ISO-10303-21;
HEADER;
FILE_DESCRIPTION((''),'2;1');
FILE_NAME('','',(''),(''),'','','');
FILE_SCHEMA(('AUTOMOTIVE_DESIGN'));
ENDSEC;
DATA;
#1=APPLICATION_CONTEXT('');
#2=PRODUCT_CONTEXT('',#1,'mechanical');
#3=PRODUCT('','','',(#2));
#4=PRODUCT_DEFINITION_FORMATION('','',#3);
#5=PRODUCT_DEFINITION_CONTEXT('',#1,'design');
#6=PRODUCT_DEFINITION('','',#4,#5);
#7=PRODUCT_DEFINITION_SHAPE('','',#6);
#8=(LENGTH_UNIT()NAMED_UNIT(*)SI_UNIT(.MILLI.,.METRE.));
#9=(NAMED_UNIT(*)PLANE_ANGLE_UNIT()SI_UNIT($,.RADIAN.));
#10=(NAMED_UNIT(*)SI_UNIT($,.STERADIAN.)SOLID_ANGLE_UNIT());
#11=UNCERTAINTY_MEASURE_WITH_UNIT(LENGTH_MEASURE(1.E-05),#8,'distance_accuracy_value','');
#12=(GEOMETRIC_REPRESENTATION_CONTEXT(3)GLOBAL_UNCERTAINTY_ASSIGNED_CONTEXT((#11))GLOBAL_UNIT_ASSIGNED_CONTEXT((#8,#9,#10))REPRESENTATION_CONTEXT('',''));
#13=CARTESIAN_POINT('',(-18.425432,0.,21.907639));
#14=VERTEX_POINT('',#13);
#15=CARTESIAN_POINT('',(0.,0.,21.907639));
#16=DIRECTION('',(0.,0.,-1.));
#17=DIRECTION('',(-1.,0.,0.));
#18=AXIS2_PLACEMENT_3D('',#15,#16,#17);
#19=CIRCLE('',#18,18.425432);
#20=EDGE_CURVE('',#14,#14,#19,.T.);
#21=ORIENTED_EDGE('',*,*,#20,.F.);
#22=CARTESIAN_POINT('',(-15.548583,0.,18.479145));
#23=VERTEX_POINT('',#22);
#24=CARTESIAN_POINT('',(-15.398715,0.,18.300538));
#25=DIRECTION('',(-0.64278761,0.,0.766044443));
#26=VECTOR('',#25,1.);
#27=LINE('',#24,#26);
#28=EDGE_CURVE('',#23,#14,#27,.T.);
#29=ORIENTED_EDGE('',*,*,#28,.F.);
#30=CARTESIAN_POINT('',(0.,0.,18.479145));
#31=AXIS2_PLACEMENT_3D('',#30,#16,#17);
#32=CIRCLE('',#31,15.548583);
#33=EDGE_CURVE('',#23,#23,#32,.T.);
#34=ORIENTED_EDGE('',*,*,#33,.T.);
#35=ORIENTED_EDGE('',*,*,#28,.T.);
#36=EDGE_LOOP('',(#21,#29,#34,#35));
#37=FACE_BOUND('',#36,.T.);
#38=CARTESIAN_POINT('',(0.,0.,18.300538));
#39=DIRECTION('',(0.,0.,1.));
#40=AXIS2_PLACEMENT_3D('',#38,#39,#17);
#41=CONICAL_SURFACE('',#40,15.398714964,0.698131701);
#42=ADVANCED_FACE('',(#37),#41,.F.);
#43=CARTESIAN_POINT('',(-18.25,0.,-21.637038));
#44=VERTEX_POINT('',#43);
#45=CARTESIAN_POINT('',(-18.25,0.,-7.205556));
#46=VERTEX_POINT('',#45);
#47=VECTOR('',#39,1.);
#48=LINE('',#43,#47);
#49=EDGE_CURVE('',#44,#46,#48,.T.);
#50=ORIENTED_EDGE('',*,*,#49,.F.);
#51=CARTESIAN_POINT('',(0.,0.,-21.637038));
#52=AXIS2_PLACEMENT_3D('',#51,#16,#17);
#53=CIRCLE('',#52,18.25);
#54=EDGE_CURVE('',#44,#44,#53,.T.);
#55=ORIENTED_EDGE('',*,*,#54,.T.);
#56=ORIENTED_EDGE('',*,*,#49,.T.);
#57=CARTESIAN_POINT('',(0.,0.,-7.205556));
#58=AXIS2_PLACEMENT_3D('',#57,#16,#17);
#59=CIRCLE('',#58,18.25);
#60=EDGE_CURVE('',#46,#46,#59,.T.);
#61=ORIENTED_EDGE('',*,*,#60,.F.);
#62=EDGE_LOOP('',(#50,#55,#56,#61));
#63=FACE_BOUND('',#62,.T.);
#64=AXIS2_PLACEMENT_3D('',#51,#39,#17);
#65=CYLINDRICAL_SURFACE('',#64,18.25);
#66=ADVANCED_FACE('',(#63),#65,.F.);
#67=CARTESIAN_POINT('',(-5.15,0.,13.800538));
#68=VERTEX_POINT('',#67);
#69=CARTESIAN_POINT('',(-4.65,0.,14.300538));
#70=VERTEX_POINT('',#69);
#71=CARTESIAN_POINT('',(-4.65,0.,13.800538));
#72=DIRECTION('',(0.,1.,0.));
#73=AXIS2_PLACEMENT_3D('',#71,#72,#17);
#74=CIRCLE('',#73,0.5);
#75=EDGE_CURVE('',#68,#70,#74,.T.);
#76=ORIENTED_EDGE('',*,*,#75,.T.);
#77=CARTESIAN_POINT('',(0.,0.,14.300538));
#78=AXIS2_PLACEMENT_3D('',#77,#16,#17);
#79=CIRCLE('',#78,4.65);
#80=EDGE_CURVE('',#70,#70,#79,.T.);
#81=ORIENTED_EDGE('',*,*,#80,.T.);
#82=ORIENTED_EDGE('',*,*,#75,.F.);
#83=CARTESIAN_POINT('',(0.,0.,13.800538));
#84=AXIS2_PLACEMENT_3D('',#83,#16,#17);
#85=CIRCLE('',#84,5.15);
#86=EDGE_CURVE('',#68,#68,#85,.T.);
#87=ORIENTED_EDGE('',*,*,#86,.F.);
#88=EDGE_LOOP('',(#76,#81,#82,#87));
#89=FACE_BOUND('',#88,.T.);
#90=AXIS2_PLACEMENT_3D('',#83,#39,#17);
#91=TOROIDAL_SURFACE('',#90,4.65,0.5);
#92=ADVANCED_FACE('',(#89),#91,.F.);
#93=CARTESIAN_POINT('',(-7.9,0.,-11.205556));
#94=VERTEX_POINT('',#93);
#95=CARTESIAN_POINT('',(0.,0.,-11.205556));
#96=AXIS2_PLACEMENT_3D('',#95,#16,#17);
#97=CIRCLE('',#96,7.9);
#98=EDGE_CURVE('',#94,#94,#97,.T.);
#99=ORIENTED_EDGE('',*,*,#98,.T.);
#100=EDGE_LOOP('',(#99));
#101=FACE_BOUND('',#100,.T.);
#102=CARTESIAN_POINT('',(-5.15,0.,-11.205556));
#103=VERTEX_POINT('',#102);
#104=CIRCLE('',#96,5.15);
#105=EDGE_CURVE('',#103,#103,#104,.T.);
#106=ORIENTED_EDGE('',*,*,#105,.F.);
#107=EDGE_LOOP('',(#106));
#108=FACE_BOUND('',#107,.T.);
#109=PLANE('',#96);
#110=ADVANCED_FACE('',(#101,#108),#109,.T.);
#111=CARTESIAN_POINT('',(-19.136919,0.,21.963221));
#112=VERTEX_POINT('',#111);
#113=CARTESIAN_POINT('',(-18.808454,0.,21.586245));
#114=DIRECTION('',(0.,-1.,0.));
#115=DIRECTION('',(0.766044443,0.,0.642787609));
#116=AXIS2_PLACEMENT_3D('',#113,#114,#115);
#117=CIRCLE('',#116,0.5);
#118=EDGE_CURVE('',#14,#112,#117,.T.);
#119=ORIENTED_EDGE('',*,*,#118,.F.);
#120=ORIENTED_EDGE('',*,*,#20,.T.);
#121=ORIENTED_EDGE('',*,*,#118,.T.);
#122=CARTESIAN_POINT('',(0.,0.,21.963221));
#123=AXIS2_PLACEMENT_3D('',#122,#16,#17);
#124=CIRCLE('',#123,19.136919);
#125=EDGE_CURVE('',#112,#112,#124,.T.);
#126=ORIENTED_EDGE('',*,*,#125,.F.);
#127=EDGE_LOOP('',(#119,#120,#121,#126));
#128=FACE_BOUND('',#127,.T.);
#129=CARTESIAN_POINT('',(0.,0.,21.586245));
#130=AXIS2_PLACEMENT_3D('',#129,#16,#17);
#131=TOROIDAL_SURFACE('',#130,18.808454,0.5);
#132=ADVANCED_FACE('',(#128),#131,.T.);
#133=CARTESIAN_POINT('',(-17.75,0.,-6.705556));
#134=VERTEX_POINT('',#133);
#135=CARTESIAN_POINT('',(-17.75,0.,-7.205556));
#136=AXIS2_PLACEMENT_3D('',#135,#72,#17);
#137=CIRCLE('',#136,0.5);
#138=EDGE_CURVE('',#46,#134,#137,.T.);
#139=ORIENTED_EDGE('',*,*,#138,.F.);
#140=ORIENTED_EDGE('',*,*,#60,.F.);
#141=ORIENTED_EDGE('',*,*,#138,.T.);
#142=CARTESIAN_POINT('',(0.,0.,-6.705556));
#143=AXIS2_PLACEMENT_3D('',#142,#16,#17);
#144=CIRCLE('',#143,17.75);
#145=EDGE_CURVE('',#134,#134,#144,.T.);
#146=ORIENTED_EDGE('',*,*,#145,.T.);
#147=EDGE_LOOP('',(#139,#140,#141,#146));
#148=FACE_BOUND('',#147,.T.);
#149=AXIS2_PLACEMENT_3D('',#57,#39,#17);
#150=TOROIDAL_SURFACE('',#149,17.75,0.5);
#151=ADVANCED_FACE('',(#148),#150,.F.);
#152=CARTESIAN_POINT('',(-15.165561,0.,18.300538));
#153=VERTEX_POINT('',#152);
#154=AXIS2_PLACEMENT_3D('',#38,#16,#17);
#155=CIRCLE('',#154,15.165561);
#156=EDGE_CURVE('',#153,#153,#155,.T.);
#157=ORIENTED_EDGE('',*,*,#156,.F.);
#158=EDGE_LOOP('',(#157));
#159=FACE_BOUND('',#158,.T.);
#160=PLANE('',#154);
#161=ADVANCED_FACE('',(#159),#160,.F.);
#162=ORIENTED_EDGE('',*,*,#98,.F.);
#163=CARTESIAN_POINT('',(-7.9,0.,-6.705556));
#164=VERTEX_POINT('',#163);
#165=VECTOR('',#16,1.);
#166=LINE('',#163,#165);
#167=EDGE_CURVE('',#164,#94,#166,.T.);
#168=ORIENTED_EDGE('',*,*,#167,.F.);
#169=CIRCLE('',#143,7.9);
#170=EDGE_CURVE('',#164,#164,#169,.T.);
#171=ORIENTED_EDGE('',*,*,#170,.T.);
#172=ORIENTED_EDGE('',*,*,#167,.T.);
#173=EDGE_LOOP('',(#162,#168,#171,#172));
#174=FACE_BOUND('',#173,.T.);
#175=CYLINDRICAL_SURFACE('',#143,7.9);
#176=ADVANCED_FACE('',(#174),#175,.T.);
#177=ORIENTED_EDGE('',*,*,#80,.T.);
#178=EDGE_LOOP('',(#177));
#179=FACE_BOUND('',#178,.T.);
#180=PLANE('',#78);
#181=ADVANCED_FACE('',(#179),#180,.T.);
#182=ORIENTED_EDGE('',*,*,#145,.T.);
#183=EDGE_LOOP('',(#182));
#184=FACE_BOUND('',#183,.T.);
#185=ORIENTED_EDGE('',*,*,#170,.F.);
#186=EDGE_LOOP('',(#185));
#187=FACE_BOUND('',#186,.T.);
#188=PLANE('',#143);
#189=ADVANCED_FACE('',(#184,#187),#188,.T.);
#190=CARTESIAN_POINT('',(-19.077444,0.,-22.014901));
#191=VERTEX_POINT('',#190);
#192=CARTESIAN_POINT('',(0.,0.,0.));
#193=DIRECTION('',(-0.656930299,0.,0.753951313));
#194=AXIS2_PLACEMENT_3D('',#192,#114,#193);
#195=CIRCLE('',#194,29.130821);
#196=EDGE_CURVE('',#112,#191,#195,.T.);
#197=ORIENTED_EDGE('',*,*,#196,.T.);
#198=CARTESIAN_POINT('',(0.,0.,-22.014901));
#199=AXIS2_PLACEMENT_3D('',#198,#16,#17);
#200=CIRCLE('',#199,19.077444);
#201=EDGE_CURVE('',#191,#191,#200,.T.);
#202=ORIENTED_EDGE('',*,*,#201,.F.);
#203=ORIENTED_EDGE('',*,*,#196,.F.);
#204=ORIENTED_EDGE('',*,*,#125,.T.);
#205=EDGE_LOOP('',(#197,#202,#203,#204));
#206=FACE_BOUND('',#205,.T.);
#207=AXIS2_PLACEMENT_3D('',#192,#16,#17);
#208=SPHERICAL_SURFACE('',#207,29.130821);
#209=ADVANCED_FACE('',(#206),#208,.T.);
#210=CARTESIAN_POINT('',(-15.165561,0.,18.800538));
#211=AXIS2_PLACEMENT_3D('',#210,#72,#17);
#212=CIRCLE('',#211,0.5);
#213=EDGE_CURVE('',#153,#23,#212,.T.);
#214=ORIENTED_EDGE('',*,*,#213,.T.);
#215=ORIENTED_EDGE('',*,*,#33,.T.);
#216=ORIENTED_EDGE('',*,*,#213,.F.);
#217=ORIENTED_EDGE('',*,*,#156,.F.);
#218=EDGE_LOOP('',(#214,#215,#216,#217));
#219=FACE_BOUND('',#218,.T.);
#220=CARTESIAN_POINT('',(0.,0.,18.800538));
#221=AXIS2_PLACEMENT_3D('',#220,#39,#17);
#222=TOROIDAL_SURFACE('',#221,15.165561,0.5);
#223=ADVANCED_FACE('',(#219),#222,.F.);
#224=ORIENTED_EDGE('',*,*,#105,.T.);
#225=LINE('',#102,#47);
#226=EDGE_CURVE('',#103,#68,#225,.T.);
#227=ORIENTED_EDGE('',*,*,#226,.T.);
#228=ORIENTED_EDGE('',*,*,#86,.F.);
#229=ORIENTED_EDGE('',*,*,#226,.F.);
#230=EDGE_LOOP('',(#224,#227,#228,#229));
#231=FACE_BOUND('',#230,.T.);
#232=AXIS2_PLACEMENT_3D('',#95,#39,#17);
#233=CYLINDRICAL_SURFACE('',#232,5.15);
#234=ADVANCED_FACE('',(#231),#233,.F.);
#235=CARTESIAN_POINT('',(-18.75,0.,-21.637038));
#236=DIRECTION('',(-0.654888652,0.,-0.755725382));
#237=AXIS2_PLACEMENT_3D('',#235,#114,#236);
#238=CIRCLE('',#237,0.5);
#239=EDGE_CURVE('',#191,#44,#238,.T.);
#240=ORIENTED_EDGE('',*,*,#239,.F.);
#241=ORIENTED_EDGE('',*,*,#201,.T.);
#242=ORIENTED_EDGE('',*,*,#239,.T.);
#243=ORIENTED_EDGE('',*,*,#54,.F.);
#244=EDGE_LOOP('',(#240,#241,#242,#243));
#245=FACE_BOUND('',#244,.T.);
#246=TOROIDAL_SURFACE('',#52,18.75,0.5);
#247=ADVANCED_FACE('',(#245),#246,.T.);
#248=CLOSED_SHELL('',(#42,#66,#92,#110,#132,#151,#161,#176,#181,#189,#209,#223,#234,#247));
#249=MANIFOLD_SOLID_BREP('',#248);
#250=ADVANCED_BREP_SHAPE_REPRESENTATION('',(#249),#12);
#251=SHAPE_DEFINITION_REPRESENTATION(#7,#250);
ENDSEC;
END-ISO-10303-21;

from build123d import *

# Parameters (mm, degrees)
F2_R = 0.5


with BuildPart() as f1:
    # F0 (on Front) → F1 (revolve)
    with BuildSketch(Plane.XZ):
        with BuildLine():
            ThreePointArc((-18.4254318222, 21.9076391525), (-18.7695123684, 22.084726587), (-19.1369191934, 21.963221004))
            ThreePointArc((-19.1369191934, 21.963221004), (-29.1307947208, -0.0393957284), (-19.0774443259, -22.0149011144))
            ThreePointArc((-19.0774443259, -22.0149011144), (-18.5423008943, -22.0918582573), (-18.25, -21.6370384232))
            Line((-18.25, -21.6370384232), (-18.25, -6.7055555556))
            Line((-18.25, -6.7055555556), (-7.9, -6.7055555556))
            Line((-7.9, -6.7055555556), (-7.9, -11.2055555556))
            Line((-7.9, -11.2055555556), (-5.15, -11.2055555556))
            Line((-5.15, -11.2055555556), (-5.15, -6.7055555556))
            Line((-5.15, -6.7055555556), (-5.15, 14.3005384632))
            Line((-5.15, 14.3005384632), (0, 14.3005384632))
            Line((0, 14.3005384632), (0, 18.3005384632))
            Line((0, 18.3005384632), (-15.3987149642, 18.3005384632))
            Line((-15.3987149642, 18.3005384632), (-18.4254318222, 21.9076391525))
        make_face()
    revolve(axis=Axis((0, 0, 1.3541673665), (0, 0, -1)))

    # F2
    f2_edges = [f1.edges().sort_by_distance(p)[0] for p in [
        (15.398715, 0, 18.300538),
        (18.25, 0, -6.705556),
        (5.15, 0, 14.300538),
    ]]
    fillet(f2_edges, radius=F2_R)


solid = f1.part
